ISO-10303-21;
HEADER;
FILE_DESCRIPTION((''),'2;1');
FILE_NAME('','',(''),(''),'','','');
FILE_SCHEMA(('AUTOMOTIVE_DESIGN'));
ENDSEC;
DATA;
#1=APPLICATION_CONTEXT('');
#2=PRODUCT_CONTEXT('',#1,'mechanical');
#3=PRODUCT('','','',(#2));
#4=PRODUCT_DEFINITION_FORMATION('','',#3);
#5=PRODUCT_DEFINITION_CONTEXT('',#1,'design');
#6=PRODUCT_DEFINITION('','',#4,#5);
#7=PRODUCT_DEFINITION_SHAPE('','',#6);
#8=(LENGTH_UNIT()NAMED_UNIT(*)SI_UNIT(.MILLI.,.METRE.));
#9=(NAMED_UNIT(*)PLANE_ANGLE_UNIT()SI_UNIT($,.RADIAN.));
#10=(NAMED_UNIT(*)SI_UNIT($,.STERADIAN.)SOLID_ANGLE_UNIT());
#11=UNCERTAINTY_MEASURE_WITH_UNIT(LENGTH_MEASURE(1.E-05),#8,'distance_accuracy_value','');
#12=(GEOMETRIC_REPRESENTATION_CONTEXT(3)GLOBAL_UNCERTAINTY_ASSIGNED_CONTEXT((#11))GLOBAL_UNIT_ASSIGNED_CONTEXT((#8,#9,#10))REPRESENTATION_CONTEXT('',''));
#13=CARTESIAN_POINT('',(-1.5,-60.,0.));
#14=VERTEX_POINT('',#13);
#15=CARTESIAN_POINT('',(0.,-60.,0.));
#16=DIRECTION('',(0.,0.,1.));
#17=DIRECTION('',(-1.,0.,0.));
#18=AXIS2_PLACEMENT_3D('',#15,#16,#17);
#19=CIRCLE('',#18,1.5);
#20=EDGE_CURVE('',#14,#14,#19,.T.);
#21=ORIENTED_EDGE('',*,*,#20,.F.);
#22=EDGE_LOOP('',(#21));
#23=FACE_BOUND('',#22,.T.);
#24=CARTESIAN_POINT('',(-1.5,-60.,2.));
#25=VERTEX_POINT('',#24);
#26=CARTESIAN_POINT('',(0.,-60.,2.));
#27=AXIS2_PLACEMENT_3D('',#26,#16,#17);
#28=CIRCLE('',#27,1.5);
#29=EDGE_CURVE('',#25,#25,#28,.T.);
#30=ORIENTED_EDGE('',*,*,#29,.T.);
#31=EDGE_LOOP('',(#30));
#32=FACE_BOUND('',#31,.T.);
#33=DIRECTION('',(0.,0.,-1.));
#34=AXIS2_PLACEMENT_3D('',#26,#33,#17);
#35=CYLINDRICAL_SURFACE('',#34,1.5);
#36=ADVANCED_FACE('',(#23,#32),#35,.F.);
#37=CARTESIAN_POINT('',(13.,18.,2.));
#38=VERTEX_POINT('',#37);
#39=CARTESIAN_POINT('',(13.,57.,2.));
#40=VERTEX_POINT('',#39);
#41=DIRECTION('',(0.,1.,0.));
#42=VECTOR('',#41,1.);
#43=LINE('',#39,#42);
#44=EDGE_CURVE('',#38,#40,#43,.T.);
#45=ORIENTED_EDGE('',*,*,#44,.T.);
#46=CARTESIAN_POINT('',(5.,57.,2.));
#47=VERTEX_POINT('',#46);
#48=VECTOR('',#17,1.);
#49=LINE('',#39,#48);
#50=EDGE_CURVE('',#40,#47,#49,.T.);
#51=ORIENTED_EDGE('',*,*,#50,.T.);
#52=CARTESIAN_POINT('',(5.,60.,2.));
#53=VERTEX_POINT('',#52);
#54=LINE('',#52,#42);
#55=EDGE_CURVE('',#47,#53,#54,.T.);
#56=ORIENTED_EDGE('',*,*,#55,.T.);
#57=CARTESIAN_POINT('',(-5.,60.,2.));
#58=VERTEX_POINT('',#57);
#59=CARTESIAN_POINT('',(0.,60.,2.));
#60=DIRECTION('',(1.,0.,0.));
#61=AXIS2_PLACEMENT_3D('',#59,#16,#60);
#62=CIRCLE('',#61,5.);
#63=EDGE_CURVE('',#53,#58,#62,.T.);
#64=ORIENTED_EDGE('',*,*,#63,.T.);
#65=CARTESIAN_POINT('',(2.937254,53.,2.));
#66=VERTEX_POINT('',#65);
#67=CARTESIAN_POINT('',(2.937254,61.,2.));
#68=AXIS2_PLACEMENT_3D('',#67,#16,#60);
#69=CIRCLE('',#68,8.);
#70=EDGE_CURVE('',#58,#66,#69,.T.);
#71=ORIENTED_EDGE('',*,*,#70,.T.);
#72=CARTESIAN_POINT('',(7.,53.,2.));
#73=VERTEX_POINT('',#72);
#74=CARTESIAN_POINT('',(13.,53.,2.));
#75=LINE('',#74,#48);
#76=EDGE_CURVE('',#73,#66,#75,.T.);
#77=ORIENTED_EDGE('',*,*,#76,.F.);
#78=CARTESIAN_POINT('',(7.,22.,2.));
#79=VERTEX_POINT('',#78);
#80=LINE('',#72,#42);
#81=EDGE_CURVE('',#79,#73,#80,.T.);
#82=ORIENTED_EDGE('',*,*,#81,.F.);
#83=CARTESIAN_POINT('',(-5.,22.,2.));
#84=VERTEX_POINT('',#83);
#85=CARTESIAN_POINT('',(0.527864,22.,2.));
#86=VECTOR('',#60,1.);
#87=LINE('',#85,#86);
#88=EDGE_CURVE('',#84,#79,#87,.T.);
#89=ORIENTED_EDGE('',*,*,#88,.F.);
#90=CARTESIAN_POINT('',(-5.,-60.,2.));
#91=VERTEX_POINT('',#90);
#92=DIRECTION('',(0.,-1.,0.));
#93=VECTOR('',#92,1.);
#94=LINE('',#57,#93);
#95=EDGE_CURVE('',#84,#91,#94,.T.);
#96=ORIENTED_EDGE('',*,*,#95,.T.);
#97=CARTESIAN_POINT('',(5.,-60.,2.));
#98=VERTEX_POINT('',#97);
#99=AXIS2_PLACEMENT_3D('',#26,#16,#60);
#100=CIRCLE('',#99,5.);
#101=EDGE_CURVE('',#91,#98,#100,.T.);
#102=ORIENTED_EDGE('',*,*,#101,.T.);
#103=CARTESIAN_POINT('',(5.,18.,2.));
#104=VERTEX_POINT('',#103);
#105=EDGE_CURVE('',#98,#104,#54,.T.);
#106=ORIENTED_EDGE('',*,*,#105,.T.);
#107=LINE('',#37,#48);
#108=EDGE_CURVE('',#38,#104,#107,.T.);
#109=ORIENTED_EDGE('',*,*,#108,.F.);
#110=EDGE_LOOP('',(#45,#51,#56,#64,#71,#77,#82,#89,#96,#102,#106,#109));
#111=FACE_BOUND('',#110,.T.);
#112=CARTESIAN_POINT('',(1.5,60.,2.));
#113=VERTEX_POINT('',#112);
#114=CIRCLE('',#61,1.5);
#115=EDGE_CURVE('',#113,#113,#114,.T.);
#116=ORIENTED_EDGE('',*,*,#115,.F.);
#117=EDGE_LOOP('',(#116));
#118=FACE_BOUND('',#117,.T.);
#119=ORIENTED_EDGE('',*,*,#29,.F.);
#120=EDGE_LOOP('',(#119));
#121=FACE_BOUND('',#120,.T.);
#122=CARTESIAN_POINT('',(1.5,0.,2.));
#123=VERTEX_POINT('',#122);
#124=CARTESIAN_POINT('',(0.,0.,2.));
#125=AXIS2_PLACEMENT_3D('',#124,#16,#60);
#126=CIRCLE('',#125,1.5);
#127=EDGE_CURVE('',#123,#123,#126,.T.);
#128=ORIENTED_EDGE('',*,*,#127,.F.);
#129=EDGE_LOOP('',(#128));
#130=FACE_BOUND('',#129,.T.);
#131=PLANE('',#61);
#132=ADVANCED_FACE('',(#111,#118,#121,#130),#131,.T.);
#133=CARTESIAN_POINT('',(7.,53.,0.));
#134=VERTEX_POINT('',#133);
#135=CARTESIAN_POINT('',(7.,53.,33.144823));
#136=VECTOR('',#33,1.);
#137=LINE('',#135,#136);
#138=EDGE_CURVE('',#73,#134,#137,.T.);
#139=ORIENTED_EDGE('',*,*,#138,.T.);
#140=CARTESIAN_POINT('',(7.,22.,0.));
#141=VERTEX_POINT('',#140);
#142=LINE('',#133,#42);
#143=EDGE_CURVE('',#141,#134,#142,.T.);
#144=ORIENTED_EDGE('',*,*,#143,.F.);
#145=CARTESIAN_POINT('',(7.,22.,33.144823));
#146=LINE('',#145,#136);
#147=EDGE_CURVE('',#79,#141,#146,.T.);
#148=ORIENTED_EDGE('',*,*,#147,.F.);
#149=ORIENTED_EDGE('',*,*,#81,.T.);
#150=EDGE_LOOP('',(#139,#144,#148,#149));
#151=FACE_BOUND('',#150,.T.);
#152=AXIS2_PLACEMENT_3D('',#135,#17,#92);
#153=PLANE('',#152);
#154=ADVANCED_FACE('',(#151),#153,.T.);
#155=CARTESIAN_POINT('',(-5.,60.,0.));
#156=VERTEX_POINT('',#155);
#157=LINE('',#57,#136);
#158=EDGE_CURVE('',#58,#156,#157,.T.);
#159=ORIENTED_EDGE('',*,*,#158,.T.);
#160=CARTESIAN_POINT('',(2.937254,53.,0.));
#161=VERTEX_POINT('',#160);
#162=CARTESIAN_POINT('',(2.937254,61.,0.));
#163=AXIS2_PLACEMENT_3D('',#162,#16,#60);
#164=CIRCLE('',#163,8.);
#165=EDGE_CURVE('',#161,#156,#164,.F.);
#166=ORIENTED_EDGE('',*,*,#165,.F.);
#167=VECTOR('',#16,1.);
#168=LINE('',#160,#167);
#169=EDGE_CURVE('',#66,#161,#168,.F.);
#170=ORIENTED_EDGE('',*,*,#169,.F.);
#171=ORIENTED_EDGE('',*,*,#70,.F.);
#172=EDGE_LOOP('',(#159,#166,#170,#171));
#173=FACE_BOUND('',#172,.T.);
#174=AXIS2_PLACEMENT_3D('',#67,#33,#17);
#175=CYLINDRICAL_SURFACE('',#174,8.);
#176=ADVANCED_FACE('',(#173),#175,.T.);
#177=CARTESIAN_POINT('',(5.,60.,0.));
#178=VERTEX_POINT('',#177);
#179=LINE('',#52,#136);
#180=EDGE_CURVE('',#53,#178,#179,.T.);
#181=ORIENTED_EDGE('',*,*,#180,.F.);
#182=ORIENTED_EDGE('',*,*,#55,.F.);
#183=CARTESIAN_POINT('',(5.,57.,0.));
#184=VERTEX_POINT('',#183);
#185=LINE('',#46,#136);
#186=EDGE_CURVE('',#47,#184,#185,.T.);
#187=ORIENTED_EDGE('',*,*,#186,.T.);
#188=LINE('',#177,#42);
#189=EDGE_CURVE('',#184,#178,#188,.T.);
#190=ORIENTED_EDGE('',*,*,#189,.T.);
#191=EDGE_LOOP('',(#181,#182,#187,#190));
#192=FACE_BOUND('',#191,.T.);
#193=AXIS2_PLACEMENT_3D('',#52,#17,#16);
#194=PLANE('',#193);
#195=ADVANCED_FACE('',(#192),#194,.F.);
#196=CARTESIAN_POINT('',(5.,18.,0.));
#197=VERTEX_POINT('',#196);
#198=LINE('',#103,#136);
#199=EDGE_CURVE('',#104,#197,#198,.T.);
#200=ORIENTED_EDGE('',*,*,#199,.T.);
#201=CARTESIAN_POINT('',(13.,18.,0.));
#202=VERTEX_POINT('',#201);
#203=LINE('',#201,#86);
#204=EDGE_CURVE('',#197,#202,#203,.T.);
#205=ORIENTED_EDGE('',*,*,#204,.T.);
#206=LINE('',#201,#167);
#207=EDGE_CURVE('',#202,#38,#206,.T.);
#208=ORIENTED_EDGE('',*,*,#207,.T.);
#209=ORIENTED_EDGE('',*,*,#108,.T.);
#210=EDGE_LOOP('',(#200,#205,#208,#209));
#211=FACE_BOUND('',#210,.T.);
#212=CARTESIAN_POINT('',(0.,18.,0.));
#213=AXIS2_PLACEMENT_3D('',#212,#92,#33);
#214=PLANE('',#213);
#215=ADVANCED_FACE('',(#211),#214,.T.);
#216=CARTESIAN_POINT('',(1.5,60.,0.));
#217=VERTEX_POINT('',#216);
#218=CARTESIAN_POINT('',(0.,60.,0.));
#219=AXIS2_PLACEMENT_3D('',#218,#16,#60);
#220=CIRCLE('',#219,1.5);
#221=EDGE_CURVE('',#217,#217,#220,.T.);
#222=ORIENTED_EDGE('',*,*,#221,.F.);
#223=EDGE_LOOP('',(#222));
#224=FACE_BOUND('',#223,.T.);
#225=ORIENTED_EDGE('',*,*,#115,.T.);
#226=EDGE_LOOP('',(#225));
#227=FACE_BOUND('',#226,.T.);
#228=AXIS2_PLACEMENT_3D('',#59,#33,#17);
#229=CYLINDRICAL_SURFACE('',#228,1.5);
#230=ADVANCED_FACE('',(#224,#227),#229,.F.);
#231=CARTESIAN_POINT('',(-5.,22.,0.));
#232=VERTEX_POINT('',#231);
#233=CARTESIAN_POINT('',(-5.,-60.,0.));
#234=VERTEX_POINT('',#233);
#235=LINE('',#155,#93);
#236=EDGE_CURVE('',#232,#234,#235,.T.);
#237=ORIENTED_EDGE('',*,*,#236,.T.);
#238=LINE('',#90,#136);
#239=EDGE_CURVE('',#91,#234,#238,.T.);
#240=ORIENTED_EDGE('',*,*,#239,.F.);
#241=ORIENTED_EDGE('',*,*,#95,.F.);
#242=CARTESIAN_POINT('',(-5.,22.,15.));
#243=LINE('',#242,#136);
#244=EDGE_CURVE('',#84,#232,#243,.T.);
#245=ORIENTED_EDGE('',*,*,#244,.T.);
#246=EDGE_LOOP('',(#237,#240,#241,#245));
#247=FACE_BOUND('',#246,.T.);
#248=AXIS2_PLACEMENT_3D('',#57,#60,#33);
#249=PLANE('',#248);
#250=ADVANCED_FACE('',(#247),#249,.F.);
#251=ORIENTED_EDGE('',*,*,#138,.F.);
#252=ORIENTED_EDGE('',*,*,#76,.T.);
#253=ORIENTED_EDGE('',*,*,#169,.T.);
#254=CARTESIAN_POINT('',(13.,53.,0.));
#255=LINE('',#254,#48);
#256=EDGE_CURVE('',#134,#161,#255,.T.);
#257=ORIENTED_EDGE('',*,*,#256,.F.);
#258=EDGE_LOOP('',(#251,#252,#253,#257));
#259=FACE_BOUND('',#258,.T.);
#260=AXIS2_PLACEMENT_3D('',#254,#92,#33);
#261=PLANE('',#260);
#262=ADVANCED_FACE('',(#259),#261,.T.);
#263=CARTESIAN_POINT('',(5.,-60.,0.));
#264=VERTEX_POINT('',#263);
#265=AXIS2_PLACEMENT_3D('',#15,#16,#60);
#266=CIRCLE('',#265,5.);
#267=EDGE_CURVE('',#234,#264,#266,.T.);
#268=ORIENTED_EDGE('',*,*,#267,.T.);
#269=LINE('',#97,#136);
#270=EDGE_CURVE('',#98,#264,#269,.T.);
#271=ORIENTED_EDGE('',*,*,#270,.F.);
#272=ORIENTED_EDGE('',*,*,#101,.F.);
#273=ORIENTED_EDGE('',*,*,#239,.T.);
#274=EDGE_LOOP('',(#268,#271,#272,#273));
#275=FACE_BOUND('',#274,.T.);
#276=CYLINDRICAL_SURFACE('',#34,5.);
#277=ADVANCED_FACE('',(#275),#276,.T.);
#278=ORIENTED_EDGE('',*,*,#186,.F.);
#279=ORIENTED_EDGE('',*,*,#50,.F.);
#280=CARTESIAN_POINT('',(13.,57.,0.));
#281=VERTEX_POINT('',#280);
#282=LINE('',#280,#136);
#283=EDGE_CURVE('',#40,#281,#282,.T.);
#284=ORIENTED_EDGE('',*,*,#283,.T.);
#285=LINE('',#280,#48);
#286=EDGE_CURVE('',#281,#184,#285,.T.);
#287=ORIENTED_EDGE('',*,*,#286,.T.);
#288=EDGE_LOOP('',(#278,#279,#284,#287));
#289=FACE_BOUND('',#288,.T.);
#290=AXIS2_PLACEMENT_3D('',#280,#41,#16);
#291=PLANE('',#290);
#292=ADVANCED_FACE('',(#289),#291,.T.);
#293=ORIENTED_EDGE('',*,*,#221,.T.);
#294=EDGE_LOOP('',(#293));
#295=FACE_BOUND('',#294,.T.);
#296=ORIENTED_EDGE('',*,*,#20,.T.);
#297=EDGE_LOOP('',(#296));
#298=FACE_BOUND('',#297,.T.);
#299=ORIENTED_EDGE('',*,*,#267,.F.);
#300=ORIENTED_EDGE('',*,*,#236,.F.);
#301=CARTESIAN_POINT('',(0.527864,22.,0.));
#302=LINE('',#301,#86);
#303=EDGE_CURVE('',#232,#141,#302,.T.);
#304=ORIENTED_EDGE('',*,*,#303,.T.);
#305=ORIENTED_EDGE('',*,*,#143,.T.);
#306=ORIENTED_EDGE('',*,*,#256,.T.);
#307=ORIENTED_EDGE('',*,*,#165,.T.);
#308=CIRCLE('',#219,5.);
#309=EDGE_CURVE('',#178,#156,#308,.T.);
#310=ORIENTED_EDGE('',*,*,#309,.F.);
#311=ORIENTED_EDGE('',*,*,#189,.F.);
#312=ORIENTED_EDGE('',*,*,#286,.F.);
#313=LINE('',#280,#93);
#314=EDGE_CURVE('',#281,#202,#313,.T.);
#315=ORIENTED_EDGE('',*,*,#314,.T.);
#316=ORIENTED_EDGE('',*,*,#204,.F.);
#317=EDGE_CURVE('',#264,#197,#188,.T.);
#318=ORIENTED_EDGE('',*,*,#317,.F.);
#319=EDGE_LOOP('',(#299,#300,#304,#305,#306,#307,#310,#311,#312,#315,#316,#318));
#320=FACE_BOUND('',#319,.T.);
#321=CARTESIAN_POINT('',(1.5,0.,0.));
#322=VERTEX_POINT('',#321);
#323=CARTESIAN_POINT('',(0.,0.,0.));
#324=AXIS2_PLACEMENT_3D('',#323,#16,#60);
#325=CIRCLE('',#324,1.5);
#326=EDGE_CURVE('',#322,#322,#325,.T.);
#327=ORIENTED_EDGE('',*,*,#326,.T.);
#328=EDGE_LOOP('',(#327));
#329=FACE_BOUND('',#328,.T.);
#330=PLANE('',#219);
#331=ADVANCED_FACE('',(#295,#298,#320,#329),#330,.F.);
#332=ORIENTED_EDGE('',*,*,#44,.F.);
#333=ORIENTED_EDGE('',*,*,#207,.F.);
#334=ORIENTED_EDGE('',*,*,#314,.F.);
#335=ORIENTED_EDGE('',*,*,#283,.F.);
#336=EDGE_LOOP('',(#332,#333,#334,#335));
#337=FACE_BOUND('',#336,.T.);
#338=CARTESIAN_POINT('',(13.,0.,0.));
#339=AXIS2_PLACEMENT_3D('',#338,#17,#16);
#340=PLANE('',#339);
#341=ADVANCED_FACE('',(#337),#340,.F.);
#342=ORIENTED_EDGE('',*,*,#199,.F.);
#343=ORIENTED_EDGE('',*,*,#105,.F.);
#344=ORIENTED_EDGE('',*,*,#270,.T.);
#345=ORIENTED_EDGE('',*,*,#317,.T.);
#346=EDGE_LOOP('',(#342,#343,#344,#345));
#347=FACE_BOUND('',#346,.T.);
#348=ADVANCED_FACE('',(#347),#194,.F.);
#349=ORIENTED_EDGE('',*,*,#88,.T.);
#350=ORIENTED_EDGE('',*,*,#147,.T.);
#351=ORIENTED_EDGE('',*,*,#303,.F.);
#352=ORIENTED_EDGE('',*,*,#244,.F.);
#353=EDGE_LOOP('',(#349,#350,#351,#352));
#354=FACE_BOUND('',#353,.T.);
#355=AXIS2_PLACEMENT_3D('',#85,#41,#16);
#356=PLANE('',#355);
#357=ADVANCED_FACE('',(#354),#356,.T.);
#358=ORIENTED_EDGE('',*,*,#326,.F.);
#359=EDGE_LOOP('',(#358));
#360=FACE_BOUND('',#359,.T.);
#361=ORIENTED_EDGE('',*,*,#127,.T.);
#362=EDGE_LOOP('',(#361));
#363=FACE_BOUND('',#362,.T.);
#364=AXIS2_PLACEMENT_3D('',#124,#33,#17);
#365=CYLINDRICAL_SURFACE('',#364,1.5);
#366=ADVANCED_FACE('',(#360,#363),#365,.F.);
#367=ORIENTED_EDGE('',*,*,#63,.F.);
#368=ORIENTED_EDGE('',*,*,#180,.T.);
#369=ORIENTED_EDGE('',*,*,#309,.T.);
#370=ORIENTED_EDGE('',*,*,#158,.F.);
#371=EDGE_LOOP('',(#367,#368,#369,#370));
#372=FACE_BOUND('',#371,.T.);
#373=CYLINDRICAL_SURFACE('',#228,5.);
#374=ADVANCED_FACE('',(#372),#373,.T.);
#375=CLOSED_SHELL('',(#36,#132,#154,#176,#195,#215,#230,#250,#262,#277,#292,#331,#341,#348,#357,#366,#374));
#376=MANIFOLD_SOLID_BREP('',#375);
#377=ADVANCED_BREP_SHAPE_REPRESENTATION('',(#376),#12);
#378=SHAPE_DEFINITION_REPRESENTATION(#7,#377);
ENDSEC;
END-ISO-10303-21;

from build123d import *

# Parameters (mm, degrees)
SKETCH_1_R          = 1.5
EXTRUDE_1_DEPTH     = 2
SKETCH_2_W          = 2
SKETCH_2_H          = 4
EXTRUDE_5_DEPTH     = 18
SKETCH_5_W          = 3
SKETCH_5_H          = 2
EXTRUDE_6_DEPTH     = 35
SKETCH_7_W          = 2
SKETCH_7_H          = 4
EXTRUDE_9_DEPTH     = 8
SKETCH_9_W          = 10
SKETCH_9_H          = 31
CUT_EXTRUDE_2_DEPTH = 15
SKETCH_10_W         = 3
SKETCH_10_H         = 31
EXTRUDE_10_DEPTH    = 2
FILLET_1_R          = 8


with BuildPart() as part:
    # 草图1 → 凸台-拉伸1 (new body)
    with BuildSketch(Plane.XY):
        with BuildLine():
            Line((5, 60), (5, -60))
            ThreePointArc((5, -60), (0, -65), (-5, -60))
            Line((-5, -60), (-5, 60))
            ThreePointArc((-5, 60), (0, 65), (5, 60))
        make_face()
        with Locations((0, 60)):
            Circle(SKETCH_1_R, mode=Mode.SUBTRACT)
        with Locations(Location((0, -60, 0), (0, 0, 180))):
            Circle(SKETCH_1_R, mode=Mode.SUBTRACT)
        Circle(SKETCH_1_R, mode=Mode.SUBTRACT)
    extrude(amount=EXTRUDE_1_DEPTH)

    # 草图2 → 凸台-拉伸5 (add)
    with BuildSketch(Plane.ZY.offset(5)):
        with Locations((1, 55)):
            Rectangle(SKETCH_2_W, SKETCH_2_H)
    extrude(amount=-EXTRUDE_5_DEPTH)

    # 草图5 → 凸台-拉伸6 (add)
    with BuildSketch(Plane.XZ.offset(-53)):
        with Locations((11.5, 1)):
            Rectangle(SKETCH_5_W, SKETCH_5_H)
    extrude(amount=EXTRUDE_6_DEPTH)

    # 草图7 → 凸台-拉伸9 (add)
    with BuildSketch(Plane(origin=(13, 0, 0), x_dir=(0, 0, -1), z_dir=(1, 0, 0))):
        with Locations((-1, 20)):
            Rectangle(SKETCH_7_W, SKETCH_7_H)
    extrude(amount=-EXTRUDE_9_DEPTH)

    # 草图9 → 切除-拉伸2 (cut)
    with BuildSketch(Plane(origin=(0, 0, 0), x_dir=(-1, 0, 0), z_dir=(0, 0, -1))):
        with Locations((0, 37.5)):
            Rectangle(SKETCH_9_W, SKETCH_9_H)
    extrude(amount=-CUT_EXTRUDE_2_DEPTH, mode=Mode.SUBTRACT)

    # 草图10 → 凸台-拉伸10 (add)
    with BuildSketch(Plane(origin=(0, 0, 0), x_dir=(-1, 0, 0), z_dir=(0, 0, -1))):
        with Locations((-8.5, 37.5)):
            Rectangle(SKETCH_10_W, SKETCH_10_H)
    extrude(amount=-EXTRUDE_10_DEPTH)

    # 圆角1
    # the kernel refuses this fillet: 8 mm, written as the material it takes off along each edge
    with BuildSketch(Plane(origin=(-5, 53, -19.843134833), x_dir=(1, 0, 0), z_dir=(0, 0, 1))) as fillet_1_piece_1:
        with BuildLine():
            CenterArc((7.937253933, 8), FILLET_1_R, 187.180755781, 82.819244219)
            Line((0, 7), (0, 0))
            Line((0, 0), (7.937253933, 0))
        make_face()
    extrude(amount=41.686269666, mode=Mode.SUBTRACT)


solid = part.part
